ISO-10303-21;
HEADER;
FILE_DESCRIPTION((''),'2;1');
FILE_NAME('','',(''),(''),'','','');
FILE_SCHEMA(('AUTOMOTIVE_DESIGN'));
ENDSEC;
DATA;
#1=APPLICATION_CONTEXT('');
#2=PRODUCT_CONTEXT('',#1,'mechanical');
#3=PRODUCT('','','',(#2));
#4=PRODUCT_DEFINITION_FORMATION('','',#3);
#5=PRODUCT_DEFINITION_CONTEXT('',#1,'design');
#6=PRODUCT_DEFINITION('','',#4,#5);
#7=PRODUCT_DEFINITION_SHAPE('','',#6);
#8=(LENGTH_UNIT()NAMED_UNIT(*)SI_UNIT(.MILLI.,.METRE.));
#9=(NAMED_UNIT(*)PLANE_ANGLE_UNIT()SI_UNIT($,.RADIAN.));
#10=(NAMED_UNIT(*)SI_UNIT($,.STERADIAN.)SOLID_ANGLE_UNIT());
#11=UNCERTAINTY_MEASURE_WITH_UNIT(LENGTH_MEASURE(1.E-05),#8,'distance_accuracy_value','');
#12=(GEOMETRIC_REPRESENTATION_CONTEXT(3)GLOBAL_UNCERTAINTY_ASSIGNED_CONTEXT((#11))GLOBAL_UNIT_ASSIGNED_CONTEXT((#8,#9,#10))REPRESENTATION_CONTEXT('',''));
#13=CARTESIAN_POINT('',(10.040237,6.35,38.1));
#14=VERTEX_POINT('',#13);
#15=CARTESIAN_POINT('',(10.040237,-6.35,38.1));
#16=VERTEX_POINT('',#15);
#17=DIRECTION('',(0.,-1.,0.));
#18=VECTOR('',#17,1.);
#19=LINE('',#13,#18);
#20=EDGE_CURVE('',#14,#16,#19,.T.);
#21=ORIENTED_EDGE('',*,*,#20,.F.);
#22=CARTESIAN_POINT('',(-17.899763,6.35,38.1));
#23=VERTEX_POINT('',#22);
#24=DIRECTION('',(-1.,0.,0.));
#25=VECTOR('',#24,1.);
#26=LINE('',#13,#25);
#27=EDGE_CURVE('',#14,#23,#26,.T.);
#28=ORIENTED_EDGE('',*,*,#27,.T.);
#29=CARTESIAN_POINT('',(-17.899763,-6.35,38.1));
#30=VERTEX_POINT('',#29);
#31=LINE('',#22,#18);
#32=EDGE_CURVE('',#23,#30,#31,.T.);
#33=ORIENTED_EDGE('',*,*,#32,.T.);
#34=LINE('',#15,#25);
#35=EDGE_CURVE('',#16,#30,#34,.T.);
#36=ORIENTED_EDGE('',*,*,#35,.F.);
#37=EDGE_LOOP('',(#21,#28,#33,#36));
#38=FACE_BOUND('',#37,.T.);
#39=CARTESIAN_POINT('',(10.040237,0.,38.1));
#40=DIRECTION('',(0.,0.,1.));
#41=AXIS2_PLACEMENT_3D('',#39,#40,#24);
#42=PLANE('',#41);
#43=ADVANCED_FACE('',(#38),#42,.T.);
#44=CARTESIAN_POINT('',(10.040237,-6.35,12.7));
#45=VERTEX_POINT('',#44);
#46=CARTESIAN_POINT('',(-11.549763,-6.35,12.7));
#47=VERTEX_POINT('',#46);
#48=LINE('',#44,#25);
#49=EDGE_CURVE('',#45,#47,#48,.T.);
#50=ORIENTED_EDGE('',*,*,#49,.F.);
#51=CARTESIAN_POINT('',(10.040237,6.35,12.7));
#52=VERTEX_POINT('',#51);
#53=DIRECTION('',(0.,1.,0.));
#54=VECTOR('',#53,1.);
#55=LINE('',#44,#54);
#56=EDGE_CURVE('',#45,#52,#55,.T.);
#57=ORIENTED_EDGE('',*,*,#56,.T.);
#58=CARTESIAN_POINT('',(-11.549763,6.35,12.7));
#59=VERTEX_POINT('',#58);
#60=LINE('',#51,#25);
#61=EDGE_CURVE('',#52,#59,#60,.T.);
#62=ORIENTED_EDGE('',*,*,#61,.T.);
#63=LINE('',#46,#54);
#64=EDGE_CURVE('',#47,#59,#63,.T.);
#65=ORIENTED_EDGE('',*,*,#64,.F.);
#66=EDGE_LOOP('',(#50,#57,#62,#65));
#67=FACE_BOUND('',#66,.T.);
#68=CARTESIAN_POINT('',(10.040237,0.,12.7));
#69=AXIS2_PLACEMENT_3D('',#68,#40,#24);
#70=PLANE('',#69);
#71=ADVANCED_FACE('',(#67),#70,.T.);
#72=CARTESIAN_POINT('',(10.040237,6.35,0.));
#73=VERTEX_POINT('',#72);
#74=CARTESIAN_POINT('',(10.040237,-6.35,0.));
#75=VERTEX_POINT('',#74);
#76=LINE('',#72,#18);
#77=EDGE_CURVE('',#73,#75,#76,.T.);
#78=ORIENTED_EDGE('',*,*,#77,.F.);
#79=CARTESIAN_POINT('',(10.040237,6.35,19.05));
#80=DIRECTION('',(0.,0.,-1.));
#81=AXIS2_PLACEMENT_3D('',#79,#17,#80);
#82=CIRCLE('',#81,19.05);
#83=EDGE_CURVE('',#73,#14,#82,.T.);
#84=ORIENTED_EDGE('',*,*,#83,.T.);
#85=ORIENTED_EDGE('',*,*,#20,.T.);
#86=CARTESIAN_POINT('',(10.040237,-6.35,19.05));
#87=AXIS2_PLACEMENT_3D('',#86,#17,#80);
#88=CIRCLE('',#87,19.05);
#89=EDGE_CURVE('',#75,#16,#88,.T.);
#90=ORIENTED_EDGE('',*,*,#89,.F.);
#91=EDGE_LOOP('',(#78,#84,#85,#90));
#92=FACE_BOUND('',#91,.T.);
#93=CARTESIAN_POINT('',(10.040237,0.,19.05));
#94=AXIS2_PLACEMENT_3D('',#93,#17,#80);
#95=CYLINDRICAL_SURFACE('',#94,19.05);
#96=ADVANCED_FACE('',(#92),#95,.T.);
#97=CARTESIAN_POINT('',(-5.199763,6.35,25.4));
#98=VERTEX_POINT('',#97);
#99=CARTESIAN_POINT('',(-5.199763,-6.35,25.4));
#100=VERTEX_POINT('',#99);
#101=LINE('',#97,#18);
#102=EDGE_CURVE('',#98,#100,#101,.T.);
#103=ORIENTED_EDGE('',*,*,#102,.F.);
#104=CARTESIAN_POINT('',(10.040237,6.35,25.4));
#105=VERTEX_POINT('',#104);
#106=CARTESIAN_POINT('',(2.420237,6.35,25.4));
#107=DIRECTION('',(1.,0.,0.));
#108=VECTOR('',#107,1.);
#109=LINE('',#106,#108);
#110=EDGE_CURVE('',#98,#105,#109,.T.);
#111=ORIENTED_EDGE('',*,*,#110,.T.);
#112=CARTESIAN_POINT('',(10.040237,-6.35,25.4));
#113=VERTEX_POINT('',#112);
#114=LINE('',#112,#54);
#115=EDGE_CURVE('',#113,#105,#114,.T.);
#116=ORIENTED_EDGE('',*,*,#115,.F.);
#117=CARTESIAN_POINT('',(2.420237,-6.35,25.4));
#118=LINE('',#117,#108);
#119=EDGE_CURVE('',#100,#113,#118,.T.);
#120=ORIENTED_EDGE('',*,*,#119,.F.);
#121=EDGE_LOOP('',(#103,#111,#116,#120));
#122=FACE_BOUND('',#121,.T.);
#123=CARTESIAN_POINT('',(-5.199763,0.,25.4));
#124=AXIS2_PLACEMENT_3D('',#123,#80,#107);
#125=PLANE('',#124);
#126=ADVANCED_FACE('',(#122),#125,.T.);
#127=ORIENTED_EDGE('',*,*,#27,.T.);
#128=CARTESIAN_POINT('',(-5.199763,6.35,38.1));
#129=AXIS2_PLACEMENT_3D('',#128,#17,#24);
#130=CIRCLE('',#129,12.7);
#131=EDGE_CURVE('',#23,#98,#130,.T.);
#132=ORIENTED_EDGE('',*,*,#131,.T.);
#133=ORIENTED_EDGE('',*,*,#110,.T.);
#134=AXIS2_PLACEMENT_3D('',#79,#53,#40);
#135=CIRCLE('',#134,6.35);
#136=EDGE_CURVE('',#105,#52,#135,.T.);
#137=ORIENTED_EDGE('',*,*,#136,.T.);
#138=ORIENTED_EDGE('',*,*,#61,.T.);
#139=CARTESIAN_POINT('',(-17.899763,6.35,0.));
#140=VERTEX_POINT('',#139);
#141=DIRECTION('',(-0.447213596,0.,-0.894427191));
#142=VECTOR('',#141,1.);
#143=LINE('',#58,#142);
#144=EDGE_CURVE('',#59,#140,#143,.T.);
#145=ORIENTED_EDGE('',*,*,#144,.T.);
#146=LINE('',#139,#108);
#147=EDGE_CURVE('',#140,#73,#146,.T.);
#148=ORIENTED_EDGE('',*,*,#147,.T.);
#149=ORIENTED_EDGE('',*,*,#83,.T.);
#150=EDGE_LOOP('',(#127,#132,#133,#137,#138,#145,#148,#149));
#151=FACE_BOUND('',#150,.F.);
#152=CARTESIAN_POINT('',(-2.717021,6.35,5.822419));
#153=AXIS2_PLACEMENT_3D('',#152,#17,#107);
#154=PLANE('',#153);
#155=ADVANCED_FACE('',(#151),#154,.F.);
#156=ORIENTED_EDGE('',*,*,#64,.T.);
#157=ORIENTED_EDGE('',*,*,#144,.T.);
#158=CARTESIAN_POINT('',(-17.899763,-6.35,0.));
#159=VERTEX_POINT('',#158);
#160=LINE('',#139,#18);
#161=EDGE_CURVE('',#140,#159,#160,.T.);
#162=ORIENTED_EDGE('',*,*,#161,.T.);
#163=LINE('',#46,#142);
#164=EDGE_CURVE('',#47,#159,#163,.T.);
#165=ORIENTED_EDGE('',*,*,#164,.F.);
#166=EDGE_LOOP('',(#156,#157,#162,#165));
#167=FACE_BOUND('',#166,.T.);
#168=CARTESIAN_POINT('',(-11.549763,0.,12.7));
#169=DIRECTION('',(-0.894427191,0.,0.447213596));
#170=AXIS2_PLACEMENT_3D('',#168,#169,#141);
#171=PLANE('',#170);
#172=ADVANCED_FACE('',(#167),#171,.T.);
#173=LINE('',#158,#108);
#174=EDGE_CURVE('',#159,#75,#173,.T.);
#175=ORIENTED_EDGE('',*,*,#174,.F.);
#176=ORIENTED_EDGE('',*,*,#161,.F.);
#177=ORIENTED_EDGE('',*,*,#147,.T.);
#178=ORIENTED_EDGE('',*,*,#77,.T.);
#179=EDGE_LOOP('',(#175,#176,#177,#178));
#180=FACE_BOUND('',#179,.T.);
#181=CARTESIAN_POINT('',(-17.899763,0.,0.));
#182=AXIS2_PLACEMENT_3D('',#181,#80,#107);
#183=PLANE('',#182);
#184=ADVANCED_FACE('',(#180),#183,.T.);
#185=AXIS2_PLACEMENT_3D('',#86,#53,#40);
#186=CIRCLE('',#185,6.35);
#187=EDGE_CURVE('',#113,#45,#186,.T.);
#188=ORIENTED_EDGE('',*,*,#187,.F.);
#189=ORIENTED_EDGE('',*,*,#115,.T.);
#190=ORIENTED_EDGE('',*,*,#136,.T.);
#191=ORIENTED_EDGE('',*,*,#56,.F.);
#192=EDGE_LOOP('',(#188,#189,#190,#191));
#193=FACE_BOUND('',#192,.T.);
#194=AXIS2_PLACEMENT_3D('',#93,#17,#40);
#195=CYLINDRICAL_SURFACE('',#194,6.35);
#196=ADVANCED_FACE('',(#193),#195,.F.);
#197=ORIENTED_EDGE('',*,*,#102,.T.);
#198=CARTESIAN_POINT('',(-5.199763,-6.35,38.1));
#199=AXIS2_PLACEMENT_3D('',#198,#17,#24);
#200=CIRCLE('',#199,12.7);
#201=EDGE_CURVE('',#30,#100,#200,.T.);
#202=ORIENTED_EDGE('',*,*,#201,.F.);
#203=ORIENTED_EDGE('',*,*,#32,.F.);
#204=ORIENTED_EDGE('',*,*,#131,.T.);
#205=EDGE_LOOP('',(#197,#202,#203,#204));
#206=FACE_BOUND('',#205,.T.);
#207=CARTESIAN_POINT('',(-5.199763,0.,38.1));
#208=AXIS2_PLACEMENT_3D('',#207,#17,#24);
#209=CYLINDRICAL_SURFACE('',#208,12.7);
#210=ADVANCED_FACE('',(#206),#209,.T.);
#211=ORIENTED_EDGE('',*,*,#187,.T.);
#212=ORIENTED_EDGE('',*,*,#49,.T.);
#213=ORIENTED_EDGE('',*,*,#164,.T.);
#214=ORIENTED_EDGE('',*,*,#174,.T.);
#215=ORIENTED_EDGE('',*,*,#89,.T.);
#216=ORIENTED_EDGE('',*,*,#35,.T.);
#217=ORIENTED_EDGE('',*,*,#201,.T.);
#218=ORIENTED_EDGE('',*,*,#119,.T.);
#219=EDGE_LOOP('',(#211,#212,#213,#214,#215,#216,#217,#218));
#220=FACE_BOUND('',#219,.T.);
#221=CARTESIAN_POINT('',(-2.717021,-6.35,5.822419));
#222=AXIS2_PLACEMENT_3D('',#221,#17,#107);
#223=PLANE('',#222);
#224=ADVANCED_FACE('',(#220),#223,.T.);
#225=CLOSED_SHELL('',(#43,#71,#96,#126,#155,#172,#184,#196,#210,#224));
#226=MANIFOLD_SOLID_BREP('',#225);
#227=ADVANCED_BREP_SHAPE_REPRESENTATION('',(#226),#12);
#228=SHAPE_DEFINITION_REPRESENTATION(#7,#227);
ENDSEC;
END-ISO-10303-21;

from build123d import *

# Parameters (mm, degrees)
F0_W     = 15.24
F0_H     = 12.7
F1_DEPTH = 6.35


# Not quite as in the source:
# - a feature names something its author has since deleted; it is built from what else it names


with BuildPart() as f1:
    # F0 (on Front) → F1 (new body, symmetric)
    with BuildSketch(Plane.XZ):
        Polygon((-11.5497628391, 12.7), (-17.8997628391, 0), (10.0402371609, 0), (10.0402371609, 12.7), align=None)
        with BuildLine():
            Line((10.0402371609, 12.7), (10.0402371609, 0))
            ThreePointArc((10.0402371609, 0), (29.0902371609, 19.05), (10.0402371609, 38.1))
            Line((10.0402371609, 38.1), (10.0402371609, 25.4))
            ThreePointArc((10.0402371609, 25.4), (16.3902371609, 19.05), (10.0402371609, 12.7))
        make_face()
        with Locations((2.4202371609, 31.75)):
            Rectangle(F0_W, F0_H)
        with BuildLine():
            Line((-5.1997628391, 25.4), (-5.1997628391, 38.1))
            Line((-5.1997628391, 38.1), (-17.8997628391, 38.1))
            ThreePointArc((-17.8997628391, 38.1), (-14.1800189601, 29.1197438789), (-5.1997628391, 25.4))
        make_face()
    extrude(amount=F1_DEPTH, both=True)


solid = f1.part
